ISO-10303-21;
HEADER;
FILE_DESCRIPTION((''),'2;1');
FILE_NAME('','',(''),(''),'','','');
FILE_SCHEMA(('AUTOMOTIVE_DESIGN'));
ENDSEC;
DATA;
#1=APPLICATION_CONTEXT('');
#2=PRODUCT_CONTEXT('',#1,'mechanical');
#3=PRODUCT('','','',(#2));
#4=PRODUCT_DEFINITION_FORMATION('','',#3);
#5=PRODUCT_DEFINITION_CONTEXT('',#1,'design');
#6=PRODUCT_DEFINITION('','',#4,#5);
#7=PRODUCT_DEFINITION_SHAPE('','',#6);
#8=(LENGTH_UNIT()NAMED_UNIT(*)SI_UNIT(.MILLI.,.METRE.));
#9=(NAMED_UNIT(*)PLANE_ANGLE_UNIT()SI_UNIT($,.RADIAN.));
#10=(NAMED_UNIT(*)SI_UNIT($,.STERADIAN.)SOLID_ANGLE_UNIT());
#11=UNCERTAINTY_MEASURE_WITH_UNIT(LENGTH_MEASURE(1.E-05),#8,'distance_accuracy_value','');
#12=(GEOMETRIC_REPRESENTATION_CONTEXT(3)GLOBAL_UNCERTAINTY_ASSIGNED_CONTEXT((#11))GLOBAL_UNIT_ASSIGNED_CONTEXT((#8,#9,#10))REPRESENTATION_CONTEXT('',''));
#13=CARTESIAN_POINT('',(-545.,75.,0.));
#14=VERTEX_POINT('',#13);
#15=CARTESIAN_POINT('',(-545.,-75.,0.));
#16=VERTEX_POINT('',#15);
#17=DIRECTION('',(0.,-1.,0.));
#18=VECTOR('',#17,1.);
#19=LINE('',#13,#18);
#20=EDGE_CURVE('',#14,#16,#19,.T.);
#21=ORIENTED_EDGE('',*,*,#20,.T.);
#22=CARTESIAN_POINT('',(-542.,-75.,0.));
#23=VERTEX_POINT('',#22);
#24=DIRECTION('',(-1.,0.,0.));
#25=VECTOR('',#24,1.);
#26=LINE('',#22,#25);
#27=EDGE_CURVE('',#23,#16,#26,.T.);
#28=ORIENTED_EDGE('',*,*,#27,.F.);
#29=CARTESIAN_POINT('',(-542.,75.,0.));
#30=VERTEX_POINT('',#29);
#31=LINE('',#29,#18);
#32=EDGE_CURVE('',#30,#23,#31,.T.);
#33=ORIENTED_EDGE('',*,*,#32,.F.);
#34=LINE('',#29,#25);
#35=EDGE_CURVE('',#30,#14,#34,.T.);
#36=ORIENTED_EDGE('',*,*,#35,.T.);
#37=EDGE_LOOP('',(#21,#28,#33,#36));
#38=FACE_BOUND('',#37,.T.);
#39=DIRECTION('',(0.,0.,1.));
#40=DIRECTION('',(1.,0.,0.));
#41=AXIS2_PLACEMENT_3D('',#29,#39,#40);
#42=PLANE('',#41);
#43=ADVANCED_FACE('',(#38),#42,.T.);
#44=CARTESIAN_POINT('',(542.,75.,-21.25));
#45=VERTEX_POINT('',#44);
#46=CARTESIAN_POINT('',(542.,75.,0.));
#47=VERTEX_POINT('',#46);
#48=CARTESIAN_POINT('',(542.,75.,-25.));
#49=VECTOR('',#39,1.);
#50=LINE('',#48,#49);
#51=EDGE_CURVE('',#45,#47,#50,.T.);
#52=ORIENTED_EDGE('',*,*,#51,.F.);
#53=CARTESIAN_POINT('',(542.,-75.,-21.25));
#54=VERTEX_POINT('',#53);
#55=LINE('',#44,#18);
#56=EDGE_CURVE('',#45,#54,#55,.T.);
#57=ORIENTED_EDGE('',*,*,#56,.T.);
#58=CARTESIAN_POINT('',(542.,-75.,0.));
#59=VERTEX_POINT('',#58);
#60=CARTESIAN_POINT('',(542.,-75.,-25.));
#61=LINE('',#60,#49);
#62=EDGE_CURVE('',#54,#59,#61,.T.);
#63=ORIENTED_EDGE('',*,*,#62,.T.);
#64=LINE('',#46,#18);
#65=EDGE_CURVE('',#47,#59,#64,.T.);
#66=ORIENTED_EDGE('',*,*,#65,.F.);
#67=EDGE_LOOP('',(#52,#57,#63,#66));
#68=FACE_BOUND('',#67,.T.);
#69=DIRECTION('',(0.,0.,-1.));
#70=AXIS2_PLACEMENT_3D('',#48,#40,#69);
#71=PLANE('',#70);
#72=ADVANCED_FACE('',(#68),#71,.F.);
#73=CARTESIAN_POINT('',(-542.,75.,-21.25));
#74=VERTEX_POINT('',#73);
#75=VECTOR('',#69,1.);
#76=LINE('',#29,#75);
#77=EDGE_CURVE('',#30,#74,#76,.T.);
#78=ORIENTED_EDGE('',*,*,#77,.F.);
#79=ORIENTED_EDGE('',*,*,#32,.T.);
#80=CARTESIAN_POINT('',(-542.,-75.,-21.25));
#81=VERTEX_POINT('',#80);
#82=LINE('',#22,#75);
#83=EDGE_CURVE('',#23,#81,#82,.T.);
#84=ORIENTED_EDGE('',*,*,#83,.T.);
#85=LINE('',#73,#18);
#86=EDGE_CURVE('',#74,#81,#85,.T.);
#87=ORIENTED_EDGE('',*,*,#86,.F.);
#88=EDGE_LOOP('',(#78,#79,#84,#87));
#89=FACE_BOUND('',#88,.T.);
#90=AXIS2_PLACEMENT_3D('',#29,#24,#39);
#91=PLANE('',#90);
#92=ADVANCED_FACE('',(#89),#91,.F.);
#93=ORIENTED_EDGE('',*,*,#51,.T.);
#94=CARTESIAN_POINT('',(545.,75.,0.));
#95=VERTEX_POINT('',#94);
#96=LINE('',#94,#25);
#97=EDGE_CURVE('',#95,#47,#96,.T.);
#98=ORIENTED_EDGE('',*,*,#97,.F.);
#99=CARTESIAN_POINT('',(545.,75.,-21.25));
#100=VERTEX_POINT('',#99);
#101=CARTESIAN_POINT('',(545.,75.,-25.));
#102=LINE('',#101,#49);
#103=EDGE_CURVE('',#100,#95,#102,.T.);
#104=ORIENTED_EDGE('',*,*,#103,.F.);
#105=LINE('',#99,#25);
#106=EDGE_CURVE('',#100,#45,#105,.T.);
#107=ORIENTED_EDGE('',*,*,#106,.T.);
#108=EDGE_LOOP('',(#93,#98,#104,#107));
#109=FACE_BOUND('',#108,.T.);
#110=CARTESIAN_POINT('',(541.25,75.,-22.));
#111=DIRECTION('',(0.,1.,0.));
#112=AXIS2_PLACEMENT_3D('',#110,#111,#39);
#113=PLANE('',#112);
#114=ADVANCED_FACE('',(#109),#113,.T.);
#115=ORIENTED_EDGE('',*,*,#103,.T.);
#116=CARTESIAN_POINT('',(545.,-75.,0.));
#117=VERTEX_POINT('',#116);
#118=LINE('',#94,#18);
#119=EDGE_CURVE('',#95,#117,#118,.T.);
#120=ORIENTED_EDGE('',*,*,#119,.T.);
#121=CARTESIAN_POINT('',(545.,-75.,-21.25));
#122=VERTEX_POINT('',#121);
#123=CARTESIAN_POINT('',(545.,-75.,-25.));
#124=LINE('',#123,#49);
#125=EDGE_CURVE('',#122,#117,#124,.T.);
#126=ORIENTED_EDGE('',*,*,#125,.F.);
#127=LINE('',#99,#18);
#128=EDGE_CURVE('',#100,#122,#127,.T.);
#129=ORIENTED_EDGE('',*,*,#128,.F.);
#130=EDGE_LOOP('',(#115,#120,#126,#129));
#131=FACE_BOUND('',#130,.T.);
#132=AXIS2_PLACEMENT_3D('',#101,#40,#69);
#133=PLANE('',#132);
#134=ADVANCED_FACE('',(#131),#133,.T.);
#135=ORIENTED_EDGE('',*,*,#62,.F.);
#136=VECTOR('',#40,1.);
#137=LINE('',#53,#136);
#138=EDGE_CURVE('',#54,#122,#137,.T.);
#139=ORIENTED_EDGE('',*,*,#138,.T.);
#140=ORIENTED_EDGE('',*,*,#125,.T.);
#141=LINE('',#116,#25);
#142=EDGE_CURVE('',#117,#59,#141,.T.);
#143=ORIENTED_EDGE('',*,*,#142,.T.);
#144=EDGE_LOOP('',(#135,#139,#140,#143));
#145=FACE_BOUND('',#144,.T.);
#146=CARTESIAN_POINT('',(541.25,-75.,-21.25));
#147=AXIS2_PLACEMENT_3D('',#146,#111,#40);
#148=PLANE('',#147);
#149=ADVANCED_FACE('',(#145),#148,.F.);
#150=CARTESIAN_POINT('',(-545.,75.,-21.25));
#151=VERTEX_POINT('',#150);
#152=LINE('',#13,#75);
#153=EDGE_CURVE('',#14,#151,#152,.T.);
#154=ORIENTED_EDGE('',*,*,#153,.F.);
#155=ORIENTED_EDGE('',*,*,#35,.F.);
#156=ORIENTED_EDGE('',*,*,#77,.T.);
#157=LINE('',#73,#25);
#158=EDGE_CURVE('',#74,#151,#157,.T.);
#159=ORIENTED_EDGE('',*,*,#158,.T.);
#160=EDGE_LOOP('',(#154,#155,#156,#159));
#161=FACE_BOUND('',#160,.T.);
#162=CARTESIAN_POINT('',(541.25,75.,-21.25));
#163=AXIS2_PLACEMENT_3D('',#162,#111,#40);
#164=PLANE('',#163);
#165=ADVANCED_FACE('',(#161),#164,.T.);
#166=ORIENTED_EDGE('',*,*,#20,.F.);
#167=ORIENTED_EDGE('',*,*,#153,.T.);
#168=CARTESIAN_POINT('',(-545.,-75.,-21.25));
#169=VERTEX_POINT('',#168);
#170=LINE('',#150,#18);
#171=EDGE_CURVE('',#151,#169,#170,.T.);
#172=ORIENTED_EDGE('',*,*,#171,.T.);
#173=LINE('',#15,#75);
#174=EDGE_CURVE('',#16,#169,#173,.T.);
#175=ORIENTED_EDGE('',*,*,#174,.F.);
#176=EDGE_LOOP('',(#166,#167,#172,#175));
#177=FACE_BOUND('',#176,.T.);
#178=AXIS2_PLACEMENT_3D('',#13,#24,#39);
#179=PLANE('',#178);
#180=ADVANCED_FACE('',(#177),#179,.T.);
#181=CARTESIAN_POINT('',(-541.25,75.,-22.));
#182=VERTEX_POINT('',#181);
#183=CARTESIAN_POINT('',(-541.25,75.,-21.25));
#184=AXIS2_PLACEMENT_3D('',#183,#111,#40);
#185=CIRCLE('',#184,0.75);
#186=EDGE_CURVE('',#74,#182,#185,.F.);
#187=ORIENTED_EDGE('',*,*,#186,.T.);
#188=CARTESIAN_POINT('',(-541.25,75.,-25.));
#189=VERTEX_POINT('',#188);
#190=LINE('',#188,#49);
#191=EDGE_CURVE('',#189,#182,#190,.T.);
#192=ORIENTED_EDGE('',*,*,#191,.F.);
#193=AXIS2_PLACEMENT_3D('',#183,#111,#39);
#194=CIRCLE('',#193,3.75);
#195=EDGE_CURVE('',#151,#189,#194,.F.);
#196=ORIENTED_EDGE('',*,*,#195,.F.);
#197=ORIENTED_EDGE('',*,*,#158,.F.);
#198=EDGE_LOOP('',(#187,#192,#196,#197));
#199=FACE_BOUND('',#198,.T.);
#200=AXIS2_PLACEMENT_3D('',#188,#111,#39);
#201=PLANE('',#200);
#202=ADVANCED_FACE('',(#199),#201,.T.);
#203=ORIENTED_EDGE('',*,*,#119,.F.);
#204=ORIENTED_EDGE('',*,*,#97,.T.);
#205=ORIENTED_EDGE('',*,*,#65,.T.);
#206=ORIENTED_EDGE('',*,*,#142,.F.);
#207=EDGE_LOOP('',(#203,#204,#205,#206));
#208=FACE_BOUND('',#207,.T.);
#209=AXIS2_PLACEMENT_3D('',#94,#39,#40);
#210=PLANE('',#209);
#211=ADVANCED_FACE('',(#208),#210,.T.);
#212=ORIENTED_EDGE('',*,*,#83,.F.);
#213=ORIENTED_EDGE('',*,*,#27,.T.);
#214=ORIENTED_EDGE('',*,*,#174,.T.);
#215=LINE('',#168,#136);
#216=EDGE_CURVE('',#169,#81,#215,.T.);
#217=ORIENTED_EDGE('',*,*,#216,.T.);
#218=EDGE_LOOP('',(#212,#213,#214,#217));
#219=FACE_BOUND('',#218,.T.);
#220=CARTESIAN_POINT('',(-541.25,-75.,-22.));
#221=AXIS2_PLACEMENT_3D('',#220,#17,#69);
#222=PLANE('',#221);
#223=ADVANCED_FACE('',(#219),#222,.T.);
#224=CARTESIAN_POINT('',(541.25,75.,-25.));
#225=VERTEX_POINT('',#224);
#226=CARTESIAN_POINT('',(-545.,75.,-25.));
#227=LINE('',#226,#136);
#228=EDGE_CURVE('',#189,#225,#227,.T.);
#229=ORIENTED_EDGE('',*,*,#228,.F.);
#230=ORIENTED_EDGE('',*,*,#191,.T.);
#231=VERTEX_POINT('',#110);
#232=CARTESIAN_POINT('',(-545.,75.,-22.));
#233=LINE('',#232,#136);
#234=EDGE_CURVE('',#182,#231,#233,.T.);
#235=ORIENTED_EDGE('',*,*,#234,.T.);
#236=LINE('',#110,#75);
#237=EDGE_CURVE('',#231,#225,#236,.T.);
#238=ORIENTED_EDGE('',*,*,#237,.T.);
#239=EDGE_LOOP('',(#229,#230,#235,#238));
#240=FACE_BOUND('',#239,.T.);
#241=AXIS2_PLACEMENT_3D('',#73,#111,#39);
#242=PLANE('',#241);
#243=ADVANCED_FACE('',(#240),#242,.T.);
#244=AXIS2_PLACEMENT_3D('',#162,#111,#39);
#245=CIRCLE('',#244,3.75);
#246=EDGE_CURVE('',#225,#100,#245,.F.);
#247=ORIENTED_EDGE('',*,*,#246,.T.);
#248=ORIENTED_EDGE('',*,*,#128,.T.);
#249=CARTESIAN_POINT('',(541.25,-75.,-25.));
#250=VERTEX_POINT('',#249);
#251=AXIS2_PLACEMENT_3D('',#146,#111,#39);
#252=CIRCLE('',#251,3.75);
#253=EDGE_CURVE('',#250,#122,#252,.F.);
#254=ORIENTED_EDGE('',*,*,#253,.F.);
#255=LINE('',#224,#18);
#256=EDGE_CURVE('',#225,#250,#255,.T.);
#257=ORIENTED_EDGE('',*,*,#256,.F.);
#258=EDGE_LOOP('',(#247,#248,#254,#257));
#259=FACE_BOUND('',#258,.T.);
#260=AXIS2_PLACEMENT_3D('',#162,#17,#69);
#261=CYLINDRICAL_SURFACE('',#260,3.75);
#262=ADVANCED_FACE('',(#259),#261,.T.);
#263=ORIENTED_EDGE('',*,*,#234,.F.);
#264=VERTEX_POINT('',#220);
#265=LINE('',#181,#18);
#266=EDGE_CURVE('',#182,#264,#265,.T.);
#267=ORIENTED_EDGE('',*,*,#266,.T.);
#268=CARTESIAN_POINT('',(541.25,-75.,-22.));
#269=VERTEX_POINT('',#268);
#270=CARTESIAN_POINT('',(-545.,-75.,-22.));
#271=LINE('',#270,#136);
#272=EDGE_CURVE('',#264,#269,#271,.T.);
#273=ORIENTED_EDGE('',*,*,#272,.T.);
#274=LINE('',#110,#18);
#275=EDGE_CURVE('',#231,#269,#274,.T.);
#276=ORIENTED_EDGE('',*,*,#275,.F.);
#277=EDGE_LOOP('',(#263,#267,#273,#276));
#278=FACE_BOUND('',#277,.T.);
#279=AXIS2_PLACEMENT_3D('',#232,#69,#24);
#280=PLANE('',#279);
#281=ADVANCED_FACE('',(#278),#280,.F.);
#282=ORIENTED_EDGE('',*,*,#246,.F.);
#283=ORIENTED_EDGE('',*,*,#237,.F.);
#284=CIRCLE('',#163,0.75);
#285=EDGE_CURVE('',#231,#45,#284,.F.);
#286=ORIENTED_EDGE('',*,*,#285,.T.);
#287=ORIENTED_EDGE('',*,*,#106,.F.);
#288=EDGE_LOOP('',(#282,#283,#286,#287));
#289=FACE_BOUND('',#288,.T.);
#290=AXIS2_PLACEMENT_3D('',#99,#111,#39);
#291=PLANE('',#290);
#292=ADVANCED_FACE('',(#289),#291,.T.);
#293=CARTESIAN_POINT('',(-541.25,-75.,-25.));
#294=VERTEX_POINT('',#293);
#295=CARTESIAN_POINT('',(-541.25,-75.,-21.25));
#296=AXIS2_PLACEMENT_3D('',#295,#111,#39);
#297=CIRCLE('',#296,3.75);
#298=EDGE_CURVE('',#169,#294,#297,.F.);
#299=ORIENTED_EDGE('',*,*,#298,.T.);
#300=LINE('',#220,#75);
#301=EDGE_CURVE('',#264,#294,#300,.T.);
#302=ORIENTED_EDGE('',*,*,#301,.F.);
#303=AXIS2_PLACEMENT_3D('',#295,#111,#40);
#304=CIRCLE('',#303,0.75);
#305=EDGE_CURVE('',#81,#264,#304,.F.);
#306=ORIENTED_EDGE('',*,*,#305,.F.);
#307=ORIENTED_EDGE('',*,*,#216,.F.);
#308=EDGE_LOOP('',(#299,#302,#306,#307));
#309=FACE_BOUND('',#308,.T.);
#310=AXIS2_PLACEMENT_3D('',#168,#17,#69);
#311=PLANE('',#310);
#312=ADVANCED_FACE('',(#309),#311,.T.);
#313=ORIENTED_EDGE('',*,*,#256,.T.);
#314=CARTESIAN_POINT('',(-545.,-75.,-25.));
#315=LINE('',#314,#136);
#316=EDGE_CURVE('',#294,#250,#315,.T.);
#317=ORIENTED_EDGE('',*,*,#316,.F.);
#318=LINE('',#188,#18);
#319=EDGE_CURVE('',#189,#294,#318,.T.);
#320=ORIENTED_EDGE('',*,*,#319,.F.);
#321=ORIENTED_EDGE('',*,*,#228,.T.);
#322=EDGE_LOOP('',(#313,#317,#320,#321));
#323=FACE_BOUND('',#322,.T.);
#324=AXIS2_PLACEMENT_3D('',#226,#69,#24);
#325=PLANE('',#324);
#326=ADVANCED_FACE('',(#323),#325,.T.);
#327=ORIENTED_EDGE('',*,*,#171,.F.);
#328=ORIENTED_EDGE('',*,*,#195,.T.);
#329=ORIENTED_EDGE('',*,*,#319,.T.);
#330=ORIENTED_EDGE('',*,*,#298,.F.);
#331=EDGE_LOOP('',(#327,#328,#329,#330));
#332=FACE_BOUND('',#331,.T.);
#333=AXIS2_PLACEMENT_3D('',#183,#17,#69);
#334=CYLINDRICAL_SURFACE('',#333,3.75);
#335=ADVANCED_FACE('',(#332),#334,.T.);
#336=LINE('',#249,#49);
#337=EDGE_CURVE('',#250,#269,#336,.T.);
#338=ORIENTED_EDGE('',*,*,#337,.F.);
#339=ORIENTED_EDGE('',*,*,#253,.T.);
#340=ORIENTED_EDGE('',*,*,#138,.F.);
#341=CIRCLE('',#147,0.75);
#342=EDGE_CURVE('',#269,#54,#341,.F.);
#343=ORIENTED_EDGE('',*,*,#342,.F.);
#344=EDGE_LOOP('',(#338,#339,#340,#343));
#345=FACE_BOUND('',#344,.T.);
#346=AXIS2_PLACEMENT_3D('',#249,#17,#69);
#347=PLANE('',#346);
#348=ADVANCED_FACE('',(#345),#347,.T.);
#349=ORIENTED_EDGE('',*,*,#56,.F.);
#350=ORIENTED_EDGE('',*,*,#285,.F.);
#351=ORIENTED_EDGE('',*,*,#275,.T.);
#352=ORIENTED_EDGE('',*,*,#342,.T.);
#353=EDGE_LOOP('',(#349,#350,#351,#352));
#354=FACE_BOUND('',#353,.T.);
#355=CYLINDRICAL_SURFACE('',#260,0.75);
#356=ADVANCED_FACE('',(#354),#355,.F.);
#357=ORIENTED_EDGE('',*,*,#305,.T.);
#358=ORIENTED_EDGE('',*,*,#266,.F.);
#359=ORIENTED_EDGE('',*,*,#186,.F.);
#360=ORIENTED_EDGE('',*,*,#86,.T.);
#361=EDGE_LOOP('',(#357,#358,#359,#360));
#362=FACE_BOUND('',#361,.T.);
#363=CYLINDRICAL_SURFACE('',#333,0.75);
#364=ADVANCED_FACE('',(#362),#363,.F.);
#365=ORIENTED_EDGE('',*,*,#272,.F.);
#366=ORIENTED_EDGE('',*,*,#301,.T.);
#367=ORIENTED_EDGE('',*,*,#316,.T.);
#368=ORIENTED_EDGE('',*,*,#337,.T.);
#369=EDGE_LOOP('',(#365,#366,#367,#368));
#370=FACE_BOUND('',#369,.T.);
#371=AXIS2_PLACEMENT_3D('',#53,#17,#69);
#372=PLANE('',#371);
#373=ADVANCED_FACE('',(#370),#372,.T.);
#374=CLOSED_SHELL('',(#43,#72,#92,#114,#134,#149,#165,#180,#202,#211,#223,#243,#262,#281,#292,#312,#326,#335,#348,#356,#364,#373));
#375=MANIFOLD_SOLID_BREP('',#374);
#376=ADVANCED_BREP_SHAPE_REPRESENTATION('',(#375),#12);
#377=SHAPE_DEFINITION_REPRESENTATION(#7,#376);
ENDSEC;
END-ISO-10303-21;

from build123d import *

# Parameters (mm, degrees)
SM_BASE_FLANGE_1_DEPTH = 75


# Sheet-metal steps are written as plain solids
with BuildPart() as part:
    # Sketch 1 → Базовая кромка1 (new, symmetric)
    with BuildSketch(Plane(origin=(0, 0, 0), x_dir=(1, 0, 0), z_dir=(0, 1, 0))):
        with BuildLine():
            Line((-545, 0), (-545, 21.25))
            ThreePointArc((-545, 21.25), (-543.901650429, 23.901650429), (-541.25, 25))
            Line((-541.25, 25), (541.25, 25))
            ThreePointArc((541.25, 25), (543.901650429, 23.901650429), (545, 21.25))
            Line((545, 21.25), (545, 0))
            Line((545, 0), (542, 0))
            Line((542, 0), (542, 21.25))
            ThreePointArc((542, 21.25), (541.780330086, 21.780330086), (541.25, 22))
            Line((541.25, 22), (-541.25, 22))
            ThreePointArc((-541.25, 22), (-541.780330086, 21.780330086), (-542, 21.25))
            Line((-542, 21.25), (-542, 0))
            Line((-542, 0), (-545, 0))
        make_face()
    extrude(amount=SM_BASE_FLANGE_1_DEPTH, both=True)


solid = part.part
